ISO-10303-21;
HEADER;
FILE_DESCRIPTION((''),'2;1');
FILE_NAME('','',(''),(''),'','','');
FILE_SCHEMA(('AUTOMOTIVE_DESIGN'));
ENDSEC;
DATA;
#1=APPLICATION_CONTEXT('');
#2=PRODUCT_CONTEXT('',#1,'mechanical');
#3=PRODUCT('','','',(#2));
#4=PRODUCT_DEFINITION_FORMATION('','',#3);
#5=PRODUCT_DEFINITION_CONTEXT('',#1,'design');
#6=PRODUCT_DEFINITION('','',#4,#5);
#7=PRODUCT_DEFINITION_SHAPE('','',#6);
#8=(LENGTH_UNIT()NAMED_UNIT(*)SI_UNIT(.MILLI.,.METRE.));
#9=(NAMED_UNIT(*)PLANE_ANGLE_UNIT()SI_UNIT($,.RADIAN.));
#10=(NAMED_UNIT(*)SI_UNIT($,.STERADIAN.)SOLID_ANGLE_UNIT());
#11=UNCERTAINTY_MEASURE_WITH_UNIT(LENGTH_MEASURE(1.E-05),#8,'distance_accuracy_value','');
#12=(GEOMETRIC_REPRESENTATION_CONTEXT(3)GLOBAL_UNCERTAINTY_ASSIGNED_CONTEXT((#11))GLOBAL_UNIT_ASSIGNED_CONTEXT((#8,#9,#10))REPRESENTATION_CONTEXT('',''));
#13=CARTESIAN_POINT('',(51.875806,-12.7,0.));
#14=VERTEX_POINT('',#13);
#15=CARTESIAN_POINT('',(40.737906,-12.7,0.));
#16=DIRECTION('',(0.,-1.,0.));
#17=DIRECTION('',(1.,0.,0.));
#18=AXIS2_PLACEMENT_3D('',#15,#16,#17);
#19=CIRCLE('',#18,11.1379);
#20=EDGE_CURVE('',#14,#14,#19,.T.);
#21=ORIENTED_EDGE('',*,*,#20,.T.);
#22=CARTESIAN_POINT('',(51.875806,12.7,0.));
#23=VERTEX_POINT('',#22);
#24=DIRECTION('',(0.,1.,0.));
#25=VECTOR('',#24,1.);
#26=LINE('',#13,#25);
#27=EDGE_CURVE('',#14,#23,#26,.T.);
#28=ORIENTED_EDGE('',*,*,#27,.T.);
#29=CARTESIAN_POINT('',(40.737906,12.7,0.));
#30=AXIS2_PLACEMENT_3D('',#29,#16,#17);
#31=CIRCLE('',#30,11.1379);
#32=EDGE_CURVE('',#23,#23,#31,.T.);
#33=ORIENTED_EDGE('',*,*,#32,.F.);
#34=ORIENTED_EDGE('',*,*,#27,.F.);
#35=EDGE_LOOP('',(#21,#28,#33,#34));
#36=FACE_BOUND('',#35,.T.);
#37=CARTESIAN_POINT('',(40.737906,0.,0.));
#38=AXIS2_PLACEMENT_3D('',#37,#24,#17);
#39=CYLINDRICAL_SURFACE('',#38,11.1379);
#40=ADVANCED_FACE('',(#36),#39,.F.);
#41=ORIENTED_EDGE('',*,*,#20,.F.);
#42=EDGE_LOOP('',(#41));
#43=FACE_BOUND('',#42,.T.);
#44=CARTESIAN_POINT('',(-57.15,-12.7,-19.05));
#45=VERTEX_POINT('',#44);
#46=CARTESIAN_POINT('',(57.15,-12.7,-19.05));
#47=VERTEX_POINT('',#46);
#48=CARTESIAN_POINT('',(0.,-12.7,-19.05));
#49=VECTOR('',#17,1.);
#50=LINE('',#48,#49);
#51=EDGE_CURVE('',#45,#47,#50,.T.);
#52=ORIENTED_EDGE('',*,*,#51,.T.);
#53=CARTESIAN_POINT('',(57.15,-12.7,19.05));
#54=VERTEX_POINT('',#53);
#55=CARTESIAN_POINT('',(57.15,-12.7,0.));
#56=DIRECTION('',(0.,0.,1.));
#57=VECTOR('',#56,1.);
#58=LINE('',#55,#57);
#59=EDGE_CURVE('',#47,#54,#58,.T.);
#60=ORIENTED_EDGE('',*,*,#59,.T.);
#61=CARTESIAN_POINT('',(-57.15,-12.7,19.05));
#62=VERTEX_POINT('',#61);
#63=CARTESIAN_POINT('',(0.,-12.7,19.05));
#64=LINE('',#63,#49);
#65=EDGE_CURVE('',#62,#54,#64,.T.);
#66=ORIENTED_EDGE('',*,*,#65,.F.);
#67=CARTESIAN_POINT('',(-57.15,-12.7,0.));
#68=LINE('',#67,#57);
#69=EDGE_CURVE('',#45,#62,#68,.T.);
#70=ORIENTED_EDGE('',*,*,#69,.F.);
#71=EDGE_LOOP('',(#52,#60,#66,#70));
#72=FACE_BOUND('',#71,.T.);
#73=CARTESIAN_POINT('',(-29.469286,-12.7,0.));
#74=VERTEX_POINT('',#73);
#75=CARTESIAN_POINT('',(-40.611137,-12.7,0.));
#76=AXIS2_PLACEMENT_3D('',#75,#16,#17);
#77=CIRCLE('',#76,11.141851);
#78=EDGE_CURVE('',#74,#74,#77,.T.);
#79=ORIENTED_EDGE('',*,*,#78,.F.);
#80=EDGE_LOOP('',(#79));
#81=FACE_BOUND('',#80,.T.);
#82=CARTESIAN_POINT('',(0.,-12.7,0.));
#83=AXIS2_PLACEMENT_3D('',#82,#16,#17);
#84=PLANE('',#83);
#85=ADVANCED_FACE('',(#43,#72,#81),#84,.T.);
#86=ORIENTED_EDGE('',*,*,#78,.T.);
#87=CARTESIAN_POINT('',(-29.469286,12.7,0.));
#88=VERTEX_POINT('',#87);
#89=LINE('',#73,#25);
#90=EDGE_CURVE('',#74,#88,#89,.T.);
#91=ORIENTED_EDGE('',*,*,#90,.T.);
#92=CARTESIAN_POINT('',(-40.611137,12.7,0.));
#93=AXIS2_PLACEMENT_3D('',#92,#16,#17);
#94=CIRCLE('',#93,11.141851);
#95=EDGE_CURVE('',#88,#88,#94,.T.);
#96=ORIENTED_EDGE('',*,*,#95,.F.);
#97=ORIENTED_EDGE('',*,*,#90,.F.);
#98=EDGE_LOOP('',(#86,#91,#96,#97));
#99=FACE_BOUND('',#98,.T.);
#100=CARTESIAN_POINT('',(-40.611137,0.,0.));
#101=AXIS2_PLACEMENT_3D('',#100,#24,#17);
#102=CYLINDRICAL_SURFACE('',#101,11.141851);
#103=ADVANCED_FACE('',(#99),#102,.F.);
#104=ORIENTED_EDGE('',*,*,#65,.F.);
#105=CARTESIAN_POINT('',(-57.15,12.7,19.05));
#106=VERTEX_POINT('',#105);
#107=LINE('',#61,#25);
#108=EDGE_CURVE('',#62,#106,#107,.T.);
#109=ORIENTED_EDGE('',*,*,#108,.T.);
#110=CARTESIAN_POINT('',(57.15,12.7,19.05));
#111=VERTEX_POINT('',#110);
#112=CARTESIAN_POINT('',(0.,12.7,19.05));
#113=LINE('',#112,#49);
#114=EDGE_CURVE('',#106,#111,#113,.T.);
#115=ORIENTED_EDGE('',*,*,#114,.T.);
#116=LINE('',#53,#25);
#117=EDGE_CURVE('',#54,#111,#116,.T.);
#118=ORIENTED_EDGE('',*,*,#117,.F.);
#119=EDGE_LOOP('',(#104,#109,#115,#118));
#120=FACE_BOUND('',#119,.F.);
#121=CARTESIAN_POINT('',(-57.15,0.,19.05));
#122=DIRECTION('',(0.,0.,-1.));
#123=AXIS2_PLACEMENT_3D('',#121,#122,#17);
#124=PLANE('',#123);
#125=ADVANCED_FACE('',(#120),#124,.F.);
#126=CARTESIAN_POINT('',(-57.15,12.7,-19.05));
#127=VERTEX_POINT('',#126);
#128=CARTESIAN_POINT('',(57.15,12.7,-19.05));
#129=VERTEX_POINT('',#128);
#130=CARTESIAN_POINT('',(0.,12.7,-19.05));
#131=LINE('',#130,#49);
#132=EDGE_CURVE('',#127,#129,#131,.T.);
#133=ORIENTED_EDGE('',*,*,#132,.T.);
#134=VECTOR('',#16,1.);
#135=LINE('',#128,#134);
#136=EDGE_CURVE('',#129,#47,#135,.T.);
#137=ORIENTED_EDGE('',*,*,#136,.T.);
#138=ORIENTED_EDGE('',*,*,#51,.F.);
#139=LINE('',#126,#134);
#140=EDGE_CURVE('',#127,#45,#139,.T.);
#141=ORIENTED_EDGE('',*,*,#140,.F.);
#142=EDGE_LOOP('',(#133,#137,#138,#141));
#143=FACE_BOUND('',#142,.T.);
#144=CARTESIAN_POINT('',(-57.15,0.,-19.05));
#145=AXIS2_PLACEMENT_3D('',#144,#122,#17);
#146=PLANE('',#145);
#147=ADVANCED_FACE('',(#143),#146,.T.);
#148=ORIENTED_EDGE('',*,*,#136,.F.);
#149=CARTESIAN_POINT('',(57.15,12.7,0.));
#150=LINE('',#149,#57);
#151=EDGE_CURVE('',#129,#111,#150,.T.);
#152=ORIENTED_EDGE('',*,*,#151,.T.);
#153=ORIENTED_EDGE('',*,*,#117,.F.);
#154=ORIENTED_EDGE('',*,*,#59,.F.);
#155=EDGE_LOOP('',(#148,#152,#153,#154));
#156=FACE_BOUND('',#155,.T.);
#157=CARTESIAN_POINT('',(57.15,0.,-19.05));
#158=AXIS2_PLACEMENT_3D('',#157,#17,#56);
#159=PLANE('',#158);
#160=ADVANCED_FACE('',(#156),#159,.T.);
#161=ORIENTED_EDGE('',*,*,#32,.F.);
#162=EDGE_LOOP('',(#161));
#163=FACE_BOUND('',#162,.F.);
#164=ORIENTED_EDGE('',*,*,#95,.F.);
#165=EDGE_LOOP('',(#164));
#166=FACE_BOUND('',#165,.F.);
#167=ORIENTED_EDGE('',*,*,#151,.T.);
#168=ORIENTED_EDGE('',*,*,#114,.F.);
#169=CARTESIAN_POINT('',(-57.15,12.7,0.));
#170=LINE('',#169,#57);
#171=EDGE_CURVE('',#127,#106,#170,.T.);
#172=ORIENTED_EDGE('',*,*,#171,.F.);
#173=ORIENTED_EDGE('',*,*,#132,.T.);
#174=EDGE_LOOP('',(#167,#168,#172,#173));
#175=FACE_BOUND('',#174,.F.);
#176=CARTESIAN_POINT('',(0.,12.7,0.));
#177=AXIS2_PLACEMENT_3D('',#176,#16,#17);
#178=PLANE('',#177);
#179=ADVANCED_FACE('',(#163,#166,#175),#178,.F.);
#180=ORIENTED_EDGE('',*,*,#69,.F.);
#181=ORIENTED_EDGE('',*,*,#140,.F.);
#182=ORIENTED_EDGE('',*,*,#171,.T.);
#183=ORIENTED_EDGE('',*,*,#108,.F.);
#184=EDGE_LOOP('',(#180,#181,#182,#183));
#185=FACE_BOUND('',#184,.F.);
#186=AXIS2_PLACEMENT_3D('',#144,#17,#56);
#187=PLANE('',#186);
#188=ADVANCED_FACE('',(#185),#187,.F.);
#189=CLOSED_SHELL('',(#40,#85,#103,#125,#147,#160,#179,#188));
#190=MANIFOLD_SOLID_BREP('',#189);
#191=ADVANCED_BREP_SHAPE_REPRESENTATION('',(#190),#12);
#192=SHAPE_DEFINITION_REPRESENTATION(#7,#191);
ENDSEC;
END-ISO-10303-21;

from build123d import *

# Parameters (mm, degrees)
F1_W     = 114.3
F1_H     = 38.1
F1_R     = 11.1418506757
F1_R_2   = 11.1379
F3_DEPTH = 12.7


# Not quite as in the source:
# - the program builds the solid bodies; features that only make, move or delete a surface that nothing else refers to are left out


with BuildPart() as f3:
    # F1 (on face) → F3 (new body, symmetric)
    with BuildSketch(Plane.XZ):
        Rectangle(F1_W, F1_H)
        with Locations((-40.6111367047, 0)):
            Circle(F1_R, mode=Mode.SUBTRACT)
        with Locations((40.7379063194, 0)):
            Circle(F1_R_2, mode=Mode.SUBTRACT)
    extrude(amount=F3_DEPTH, both=True)


solid = f3.part
